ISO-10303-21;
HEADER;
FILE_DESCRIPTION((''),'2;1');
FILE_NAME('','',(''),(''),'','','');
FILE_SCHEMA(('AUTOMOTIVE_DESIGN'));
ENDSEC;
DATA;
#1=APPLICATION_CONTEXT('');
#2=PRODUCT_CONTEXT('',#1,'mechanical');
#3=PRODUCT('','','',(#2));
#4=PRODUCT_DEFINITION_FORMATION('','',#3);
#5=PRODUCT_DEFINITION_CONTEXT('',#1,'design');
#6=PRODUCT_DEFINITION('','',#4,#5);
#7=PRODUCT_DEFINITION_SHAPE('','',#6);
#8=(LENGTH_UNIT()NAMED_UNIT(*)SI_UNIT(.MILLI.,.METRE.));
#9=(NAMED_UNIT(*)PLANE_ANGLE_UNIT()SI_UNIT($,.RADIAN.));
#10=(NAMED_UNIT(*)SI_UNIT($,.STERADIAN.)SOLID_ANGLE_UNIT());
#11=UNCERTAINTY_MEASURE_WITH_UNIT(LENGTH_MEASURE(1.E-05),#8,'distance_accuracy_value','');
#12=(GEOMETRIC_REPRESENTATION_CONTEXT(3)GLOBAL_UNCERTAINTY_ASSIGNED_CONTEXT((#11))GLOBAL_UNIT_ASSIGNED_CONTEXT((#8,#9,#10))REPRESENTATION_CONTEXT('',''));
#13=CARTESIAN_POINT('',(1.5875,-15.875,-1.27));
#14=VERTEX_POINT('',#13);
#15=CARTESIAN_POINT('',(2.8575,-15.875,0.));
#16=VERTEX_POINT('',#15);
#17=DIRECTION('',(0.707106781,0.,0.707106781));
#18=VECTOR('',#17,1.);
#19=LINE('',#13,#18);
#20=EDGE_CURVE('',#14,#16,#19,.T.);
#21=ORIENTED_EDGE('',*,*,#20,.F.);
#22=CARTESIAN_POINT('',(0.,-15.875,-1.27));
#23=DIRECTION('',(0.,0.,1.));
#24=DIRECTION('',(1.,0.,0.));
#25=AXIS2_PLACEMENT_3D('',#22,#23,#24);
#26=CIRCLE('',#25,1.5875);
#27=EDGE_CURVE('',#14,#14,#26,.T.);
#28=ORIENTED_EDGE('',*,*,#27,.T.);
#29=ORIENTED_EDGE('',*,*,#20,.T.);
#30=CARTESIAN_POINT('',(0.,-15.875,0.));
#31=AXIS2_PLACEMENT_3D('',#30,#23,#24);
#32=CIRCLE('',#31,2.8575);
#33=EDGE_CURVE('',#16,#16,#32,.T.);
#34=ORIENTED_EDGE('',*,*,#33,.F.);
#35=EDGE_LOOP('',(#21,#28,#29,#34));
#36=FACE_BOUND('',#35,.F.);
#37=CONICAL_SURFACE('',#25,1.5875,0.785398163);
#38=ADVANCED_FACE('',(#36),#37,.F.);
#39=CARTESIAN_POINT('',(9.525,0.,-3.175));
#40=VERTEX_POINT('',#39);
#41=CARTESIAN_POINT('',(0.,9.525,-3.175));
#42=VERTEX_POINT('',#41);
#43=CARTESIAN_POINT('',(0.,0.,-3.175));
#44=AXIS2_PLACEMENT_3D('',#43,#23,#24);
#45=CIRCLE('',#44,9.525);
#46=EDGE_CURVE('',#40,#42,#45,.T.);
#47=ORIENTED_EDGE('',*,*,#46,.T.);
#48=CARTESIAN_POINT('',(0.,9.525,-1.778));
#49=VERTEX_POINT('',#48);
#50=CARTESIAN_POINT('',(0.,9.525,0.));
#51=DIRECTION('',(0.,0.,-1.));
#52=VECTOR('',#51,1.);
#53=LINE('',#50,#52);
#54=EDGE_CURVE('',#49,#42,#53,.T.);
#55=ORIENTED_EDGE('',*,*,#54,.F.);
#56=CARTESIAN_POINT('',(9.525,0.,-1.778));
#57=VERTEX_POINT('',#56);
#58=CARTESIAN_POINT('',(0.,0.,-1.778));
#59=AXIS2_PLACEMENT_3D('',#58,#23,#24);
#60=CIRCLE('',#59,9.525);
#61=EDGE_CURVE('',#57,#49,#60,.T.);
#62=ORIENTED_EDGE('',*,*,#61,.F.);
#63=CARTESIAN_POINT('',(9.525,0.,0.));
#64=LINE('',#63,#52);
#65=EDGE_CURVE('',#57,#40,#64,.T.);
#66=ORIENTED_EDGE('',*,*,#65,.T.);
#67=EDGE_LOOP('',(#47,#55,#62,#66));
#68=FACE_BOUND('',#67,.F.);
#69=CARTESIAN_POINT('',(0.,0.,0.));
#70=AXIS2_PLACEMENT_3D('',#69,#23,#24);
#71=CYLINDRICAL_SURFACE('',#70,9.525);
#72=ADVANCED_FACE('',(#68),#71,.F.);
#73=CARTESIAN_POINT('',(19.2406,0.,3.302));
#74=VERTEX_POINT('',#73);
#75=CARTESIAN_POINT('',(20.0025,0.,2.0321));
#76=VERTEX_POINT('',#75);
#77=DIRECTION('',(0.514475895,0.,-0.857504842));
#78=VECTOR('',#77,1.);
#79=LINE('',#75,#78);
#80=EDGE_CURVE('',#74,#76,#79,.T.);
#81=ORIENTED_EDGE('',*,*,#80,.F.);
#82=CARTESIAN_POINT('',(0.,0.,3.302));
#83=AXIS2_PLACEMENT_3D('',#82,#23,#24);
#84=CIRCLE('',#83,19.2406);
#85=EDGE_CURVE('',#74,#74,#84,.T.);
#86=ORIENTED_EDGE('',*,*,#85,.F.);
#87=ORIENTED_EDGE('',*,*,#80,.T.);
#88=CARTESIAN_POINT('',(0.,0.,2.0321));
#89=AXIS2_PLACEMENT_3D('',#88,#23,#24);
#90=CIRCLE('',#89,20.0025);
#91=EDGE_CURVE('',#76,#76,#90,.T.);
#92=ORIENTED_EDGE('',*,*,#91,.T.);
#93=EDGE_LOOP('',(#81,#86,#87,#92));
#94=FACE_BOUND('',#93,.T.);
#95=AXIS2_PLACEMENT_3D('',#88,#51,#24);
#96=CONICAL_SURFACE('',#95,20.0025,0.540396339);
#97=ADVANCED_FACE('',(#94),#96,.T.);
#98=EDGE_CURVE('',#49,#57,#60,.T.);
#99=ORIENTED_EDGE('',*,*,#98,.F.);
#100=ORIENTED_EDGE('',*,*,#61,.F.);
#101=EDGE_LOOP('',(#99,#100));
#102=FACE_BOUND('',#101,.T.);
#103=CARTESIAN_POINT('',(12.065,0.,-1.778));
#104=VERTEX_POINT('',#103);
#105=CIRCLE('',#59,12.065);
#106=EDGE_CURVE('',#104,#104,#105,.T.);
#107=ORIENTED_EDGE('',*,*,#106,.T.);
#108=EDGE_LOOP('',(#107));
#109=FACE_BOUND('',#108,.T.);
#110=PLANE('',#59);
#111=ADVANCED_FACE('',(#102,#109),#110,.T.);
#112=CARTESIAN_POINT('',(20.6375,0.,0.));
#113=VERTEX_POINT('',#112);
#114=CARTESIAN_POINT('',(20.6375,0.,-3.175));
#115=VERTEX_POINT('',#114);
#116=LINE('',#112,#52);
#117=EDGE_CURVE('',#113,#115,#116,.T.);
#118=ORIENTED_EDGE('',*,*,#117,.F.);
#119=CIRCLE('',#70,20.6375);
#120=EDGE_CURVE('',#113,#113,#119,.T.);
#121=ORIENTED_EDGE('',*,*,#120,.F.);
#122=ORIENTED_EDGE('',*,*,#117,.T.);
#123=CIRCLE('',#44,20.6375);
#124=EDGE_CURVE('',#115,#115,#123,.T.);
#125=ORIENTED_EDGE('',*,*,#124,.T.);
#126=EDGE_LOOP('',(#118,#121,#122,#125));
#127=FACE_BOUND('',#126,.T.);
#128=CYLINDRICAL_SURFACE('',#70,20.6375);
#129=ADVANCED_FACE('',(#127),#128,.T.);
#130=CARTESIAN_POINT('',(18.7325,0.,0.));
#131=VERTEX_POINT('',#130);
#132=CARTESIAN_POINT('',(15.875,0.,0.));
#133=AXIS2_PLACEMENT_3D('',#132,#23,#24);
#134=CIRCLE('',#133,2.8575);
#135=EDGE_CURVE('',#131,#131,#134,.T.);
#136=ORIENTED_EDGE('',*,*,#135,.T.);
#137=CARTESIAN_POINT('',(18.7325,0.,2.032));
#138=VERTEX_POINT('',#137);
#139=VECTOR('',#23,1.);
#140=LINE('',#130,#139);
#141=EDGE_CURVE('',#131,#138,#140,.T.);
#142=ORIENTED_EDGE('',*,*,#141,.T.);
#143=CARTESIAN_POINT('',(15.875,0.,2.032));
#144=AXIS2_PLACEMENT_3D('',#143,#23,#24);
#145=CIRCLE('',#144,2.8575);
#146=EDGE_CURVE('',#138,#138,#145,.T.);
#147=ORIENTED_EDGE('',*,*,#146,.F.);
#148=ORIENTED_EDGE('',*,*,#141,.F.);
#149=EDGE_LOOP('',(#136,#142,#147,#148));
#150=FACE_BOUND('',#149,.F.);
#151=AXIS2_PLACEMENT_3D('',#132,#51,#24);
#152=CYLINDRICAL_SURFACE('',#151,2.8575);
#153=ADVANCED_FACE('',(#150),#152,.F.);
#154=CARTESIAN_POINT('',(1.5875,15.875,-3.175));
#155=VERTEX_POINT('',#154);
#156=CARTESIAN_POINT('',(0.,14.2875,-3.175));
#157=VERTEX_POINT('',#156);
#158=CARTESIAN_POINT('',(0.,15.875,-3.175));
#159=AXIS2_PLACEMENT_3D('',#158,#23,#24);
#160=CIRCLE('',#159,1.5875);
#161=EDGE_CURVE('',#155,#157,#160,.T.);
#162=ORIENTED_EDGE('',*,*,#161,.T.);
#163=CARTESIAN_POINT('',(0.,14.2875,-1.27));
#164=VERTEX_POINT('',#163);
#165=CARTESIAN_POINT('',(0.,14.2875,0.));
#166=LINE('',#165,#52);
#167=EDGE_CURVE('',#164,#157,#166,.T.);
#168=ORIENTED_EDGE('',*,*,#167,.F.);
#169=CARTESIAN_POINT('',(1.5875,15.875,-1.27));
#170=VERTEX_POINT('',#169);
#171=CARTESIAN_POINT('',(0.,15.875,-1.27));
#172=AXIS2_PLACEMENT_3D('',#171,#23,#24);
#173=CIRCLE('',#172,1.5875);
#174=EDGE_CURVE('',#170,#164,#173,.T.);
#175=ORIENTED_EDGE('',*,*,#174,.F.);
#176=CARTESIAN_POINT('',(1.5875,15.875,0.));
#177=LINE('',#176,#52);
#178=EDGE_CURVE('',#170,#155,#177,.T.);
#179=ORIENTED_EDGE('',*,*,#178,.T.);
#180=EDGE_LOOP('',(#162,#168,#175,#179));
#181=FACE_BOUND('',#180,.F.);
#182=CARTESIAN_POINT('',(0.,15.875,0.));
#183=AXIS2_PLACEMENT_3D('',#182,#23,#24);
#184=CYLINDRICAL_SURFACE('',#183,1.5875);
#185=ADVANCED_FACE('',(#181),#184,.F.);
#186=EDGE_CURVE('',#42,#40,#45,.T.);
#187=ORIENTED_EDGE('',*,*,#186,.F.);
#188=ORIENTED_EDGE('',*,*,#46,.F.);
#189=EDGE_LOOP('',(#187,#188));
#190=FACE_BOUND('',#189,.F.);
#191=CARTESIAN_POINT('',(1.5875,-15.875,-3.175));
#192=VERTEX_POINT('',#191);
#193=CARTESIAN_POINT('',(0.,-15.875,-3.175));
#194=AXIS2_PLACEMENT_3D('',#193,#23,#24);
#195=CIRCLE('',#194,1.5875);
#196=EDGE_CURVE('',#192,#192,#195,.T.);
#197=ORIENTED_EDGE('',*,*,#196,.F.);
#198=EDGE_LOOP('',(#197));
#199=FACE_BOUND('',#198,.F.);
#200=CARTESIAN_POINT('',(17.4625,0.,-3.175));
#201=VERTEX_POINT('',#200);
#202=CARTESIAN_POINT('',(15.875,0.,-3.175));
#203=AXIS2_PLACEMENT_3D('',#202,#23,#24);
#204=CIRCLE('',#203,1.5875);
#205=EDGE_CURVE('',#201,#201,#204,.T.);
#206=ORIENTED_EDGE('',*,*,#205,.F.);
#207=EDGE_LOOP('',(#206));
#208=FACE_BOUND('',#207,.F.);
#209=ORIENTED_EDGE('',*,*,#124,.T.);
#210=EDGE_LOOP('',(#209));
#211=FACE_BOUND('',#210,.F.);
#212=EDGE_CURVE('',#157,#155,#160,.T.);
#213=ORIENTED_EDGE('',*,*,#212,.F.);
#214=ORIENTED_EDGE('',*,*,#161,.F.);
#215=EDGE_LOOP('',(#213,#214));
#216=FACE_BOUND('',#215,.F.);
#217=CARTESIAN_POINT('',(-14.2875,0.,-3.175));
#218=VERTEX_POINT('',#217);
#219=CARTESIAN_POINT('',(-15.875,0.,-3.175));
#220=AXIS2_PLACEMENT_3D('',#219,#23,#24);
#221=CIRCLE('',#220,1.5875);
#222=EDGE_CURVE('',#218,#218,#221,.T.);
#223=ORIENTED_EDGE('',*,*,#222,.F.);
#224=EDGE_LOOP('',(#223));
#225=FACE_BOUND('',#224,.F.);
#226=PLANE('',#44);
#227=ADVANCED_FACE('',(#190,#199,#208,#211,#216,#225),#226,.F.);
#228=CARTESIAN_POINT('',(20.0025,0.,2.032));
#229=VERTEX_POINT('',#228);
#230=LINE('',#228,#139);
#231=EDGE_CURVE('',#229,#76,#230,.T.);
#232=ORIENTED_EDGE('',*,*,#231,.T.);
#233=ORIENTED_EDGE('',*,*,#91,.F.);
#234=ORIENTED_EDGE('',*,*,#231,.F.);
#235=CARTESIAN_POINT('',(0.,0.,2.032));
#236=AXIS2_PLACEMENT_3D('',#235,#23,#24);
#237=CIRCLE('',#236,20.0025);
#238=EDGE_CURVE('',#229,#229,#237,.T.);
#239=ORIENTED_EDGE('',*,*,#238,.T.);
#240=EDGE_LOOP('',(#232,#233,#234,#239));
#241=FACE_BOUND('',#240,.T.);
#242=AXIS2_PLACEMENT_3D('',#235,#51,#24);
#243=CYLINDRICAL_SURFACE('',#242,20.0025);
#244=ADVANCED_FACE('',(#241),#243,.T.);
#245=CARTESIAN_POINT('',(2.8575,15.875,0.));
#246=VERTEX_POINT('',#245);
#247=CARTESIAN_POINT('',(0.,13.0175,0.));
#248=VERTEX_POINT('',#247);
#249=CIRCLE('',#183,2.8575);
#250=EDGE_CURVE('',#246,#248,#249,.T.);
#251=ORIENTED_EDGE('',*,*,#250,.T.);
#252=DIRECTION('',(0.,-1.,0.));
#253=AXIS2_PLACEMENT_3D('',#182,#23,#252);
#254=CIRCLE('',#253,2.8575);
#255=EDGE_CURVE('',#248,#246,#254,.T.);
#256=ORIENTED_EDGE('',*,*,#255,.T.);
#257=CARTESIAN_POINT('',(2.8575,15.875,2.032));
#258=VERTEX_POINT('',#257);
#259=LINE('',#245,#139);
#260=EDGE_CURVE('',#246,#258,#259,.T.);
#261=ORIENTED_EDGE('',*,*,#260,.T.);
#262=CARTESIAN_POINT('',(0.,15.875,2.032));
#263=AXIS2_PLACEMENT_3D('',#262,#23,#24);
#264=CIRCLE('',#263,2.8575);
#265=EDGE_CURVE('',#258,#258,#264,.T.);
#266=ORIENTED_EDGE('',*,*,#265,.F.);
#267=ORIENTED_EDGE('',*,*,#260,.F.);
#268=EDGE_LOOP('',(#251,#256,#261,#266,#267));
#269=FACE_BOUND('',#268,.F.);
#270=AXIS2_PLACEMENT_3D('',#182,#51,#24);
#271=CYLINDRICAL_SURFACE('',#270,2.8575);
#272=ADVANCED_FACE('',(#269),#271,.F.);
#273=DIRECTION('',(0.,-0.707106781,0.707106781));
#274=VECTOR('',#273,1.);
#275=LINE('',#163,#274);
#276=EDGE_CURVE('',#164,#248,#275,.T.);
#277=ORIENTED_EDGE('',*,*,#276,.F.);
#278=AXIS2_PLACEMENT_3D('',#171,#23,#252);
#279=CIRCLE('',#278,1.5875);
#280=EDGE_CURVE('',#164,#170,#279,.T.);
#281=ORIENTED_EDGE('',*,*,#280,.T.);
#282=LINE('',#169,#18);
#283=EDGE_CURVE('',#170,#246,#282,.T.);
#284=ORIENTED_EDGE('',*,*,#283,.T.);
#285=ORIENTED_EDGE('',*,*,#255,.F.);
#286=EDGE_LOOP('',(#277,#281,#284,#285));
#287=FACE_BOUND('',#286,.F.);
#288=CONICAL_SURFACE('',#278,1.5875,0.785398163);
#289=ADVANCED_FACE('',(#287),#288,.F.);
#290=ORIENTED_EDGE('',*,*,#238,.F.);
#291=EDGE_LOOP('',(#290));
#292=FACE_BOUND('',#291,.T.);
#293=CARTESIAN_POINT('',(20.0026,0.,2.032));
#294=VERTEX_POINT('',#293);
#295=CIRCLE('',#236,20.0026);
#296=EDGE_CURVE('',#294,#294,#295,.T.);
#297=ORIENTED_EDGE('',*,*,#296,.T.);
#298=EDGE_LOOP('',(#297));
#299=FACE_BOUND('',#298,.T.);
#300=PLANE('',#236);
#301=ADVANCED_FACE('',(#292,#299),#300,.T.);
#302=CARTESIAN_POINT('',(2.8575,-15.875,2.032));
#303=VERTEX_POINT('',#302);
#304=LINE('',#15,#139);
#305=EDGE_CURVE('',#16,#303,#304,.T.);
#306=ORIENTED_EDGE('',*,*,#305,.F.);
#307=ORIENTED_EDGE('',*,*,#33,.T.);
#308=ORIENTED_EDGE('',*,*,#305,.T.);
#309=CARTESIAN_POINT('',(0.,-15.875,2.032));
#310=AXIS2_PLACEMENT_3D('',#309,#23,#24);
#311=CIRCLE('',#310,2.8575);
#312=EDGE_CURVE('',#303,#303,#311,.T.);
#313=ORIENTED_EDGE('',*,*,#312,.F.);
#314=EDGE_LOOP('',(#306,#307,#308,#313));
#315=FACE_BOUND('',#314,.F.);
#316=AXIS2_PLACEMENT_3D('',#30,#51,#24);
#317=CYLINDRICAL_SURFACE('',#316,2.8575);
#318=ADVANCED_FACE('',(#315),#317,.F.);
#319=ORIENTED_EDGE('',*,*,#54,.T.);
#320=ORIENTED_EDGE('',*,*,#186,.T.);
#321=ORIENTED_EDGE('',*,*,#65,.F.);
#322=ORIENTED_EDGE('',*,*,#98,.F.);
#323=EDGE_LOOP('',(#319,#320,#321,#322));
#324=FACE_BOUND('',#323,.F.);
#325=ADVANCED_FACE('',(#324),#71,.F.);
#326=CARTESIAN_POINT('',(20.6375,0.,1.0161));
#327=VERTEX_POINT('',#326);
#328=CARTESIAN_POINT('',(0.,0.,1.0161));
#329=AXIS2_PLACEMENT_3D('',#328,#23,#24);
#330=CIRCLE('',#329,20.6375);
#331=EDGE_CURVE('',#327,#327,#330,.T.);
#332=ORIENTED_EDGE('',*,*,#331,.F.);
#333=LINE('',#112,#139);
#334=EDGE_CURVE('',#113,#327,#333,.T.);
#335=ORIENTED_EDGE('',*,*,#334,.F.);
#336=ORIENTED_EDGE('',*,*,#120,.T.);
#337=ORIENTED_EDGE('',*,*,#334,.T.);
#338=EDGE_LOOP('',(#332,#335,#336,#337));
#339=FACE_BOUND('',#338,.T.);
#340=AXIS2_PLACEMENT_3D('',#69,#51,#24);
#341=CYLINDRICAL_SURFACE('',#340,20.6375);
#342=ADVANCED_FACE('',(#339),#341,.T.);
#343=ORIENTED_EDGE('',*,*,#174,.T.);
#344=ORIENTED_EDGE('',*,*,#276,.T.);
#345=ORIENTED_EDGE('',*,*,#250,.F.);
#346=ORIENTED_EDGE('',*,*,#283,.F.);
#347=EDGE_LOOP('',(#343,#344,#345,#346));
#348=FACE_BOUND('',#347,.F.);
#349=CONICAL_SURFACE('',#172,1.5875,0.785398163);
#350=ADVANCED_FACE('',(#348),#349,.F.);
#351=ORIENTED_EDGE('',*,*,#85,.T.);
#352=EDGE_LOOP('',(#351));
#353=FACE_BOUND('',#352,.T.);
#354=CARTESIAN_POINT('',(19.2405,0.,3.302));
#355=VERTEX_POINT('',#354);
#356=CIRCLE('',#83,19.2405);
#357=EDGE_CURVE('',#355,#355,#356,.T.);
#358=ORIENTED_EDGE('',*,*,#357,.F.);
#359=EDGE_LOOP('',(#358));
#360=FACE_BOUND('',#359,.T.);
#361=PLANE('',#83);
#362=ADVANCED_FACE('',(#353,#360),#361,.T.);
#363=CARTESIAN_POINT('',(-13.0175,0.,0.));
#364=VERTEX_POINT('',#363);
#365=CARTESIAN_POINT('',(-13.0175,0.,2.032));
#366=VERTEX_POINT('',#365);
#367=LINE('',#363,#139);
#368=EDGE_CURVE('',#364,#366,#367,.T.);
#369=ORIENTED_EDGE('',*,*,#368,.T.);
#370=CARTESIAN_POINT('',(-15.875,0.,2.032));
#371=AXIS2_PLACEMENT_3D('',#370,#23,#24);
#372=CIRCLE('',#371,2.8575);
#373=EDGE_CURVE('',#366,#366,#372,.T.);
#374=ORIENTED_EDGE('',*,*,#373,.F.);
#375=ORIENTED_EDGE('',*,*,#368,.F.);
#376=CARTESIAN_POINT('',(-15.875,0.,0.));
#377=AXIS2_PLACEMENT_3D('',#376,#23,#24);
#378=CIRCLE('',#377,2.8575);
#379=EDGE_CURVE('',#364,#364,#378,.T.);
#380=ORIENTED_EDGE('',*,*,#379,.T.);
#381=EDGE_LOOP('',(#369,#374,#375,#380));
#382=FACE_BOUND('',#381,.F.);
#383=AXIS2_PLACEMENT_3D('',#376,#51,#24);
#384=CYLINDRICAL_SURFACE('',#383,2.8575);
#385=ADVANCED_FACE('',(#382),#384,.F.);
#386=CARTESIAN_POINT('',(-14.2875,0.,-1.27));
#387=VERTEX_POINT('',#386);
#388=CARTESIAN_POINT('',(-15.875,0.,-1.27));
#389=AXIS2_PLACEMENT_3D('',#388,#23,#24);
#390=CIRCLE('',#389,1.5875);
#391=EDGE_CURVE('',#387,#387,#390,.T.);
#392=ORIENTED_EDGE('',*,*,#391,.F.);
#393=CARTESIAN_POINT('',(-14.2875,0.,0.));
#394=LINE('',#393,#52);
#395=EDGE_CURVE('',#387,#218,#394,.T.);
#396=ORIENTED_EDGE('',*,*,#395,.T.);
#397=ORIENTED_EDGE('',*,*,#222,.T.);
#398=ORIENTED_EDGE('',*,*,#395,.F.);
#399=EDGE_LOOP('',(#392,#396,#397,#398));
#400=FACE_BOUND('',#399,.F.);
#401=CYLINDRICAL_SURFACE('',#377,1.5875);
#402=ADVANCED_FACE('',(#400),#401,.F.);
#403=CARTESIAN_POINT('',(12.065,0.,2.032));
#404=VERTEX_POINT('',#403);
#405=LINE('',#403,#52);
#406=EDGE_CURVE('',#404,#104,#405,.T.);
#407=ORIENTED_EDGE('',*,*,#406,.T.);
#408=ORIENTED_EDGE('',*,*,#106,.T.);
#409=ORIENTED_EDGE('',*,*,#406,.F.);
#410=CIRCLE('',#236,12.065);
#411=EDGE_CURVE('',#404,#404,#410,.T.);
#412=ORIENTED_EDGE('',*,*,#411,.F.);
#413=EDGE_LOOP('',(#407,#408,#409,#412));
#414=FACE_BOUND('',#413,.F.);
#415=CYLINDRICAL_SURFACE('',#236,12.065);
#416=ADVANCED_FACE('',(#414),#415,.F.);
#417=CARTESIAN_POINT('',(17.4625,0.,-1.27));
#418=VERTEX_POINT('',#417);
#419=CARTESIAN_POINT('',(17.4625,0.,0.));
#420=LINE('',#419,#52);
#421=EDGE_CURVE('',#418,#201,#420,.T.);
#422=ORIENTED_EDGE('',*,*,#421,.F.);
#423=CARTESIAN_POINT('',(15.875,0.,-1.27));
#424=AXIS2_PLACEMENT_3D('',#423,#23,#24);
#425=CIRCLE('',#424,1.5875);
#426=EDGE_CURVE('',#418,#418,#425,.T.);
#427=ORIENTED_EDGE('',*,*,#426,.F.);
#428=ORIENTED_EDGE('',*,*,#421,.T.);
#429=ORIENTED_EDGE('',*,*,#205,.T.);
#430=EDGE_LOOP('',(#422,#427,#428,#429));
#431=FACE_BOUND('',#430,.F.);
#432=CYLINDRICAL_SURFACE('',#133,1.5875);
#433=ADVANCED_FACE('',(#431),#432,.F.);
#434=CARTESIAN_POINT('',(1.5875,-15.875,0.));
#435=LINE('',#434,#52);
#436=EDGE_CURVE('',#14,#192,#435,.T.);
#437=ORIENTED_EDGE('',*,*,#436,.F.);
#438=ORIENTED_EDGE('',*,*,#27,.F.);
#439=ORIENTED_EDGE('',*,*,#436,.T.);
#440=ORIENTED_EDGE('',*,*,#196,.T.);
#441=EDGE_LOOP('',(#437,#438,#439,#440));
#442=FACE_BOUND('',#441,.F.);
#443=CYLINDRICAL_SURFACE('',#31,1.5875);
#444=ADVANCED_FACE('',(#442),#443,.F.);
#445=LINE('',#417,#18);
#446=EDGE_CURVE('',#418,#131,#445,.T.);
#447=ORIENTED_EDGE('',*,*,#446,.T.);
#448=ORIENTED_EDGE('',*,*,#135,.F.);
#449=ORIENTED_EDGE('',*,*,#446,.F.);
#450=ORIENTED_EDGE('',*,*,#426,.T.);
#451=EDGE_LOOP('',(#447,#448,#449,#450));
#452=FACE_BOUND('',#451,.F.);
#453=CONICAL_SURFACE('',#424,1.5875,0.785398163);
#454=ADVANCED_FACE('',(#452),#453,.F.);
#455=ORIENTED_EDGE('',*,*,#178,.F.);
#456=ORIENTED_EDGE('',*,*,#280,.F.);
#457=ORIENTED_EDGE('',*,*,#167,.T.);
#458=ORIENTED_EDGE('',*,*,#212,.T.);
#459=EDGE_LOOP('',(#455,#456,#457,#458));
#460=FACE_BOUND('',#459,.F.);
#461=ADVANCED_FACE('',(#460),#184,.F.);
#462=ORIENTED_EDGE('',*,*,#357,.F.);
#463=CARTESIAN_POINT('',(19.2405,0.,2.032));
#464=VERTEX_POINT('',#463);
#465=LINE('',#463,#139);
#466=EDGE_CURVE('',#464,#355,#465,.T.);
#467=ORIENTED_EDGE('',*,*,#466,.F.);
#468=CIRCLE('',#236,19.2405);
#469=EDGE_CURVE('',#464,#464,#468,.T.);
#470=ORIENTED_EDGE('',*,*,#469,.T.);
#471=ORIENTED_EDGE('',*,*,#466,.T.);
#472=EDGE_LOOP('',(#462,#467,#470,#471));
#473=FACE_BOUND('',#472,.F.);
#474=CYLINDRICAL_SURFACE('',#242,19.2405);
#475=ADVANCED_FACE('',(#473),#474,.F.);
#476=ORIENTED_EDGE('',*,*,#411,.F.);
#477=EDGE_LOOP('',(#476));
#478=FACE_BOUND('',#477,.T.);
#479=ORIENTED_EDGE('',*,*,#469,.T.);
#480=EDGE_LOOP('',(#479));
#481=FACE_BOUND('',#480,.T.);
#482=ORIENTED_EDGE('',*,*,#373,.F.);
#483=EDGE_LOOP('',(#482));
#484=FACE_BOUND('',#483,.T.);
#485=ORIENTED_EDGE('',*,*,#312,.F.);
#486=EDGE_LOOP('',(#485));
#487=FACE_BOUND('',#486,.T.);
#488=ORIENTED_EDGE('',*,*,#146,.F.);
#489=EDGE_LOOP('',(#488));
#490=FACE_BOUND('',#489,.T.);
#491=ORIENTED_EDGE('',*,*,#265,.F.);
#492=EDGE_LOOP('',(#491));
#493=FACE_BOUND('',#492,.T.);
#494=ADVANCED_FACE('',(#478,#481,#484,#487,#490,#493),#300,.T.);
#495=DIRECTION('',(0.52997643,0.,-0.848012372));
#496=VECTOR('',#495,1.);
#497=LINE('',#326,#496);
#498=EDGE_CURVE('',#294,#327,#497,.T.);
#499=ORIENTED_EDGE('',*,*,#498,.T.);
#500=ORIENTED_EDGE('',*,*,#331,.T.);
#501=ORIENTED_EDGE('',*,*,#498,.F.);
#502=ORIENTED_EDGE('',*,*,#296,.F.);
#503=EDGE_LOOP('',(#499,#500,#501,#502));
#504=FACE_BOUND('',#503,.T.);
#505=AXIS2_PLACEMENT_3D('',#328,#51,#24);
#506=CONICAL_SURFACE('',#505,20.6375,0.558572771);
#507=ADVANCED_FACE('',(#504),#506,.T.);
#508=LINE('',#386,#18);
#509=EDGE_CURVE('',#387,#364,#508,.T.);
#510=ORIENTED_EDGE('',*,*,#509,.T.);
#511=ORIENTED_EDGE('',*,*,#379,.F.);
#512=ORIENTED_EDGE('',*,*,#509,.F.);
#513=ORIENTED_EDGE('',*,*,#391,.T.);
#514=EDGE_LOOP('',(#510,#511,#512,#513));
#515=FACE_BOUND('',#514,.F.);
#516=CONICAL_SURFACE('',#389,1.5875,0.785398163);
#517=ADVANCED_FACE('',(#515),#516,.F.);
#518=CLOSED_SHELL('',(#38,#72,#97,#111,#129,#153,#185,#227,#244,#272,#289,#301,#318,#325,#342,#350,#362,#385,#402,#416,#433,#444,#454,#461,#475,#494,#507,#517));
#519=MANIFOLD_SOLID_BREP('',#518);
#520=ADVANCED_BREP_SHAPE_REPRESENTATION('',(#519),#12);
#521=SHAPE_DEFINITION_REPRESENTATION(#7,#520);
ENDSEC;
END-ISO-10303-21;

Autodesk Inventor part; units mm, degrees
ref_plane "YZ Plane" through (0, 0, 0) normal (1, 0, 0) x (0, 1, 0)
ref_plane "XZ Plane" through (0, 0, 0) normal (0, 1, 0) x (-1, 0, 0)
ref_plane "XY Plane" through (0, 0, 0) normal (0, 0, 1) x (1, 0, 0)
sketch "Sketch1" plane through (0, 0, 0) normal (0, 0, 1) x (1, 0, 0)
  circle A0 centre (0, 0) radius 9.525
  line L0 (0, 0) -> (0, 15.875)
  circle A1 centre (0, 15.875) radius 1.5875
  circle A2 centre (-15.875, 0) radius 1.5875
  circle A3 centre (0, -15.875) radius 1.5875
  circle A4 centre (15.875, 0) radius 1.5875
  circle A5 centre (0, 0) radius 20.6375
  dimension "d0" = 19.05
  dimension "d1" = 15.875
  dimension "d2" = 3.175
  dimension "d5" = 360
  dimension "d7" = 41.275
extrude "Extrusion1" add sketch "Sketch1" against normal blind 3.175
chamfer "Chamfer1" distance 1.27 angle 45 4 edges at (-1.5875, 15.875, 0) (14.2875, 0, 0) (-1.5875, -15.875, 0) (-17.4625, 0, 0)
sketch "Sketch4" plane through (0, 0, 0) normal (0, 0, 1) x (1, 0, 0)
  circle A0 centre (0, -15.875) radius 2.8575 projected
  circle A1 centre (0, 15.875) radius 2.8575 projected
  circle A2 centre (0, 0) radius 9.525 projected
  circle A3 centre (0, 0) radius 20.6375 projected
  circle A4 centre (15.875, 0) radius 2.8575 projected
  circle A5 centre (-15.875, 0) radius 2.8575 projected
extrude "Extrusion3" add sketch "Sketch4" along normal blind 2.032
sketch "Sketch5" plane through (0, 0, 2.032) normal (0, 0, 1) x (1, 0, 0)
  circle A0 centre (0, 0) radius 12.065
  dimension "d17" = 24.13
extrude "Extrusion4" cut sketch "Sketch5" against normal blind 3.81
sketch "Sketch6" plane through (0, 0, 2.032) normal (0, 0, 1) x (1, 0, 0)
  circle A0 centre (0, 0) radius 19.2405
  circle A1 centre (0, 0) radius 20.0025
  dimension "d20" = 38.481
  dimension "d21" = 40.005
extrude "Extrusion5" add sketch "Sketch6" along normal blind 1.27
chamfer "Chamfer2" distance 0.762 distance2 1.27 1 edges at (-20.0025, 0, 3.302) measured on face at (19.3684, -3.1305, 3.302)
chamfer "Chamfer3" distance 0.635 distance2 1.016 1 edges at (-20.6375, 0, 2.032) measured on face at (20.0322, -3.2419, 2.032)
properties part number "RadialBearingMountCover" material "ABS Plastic"
